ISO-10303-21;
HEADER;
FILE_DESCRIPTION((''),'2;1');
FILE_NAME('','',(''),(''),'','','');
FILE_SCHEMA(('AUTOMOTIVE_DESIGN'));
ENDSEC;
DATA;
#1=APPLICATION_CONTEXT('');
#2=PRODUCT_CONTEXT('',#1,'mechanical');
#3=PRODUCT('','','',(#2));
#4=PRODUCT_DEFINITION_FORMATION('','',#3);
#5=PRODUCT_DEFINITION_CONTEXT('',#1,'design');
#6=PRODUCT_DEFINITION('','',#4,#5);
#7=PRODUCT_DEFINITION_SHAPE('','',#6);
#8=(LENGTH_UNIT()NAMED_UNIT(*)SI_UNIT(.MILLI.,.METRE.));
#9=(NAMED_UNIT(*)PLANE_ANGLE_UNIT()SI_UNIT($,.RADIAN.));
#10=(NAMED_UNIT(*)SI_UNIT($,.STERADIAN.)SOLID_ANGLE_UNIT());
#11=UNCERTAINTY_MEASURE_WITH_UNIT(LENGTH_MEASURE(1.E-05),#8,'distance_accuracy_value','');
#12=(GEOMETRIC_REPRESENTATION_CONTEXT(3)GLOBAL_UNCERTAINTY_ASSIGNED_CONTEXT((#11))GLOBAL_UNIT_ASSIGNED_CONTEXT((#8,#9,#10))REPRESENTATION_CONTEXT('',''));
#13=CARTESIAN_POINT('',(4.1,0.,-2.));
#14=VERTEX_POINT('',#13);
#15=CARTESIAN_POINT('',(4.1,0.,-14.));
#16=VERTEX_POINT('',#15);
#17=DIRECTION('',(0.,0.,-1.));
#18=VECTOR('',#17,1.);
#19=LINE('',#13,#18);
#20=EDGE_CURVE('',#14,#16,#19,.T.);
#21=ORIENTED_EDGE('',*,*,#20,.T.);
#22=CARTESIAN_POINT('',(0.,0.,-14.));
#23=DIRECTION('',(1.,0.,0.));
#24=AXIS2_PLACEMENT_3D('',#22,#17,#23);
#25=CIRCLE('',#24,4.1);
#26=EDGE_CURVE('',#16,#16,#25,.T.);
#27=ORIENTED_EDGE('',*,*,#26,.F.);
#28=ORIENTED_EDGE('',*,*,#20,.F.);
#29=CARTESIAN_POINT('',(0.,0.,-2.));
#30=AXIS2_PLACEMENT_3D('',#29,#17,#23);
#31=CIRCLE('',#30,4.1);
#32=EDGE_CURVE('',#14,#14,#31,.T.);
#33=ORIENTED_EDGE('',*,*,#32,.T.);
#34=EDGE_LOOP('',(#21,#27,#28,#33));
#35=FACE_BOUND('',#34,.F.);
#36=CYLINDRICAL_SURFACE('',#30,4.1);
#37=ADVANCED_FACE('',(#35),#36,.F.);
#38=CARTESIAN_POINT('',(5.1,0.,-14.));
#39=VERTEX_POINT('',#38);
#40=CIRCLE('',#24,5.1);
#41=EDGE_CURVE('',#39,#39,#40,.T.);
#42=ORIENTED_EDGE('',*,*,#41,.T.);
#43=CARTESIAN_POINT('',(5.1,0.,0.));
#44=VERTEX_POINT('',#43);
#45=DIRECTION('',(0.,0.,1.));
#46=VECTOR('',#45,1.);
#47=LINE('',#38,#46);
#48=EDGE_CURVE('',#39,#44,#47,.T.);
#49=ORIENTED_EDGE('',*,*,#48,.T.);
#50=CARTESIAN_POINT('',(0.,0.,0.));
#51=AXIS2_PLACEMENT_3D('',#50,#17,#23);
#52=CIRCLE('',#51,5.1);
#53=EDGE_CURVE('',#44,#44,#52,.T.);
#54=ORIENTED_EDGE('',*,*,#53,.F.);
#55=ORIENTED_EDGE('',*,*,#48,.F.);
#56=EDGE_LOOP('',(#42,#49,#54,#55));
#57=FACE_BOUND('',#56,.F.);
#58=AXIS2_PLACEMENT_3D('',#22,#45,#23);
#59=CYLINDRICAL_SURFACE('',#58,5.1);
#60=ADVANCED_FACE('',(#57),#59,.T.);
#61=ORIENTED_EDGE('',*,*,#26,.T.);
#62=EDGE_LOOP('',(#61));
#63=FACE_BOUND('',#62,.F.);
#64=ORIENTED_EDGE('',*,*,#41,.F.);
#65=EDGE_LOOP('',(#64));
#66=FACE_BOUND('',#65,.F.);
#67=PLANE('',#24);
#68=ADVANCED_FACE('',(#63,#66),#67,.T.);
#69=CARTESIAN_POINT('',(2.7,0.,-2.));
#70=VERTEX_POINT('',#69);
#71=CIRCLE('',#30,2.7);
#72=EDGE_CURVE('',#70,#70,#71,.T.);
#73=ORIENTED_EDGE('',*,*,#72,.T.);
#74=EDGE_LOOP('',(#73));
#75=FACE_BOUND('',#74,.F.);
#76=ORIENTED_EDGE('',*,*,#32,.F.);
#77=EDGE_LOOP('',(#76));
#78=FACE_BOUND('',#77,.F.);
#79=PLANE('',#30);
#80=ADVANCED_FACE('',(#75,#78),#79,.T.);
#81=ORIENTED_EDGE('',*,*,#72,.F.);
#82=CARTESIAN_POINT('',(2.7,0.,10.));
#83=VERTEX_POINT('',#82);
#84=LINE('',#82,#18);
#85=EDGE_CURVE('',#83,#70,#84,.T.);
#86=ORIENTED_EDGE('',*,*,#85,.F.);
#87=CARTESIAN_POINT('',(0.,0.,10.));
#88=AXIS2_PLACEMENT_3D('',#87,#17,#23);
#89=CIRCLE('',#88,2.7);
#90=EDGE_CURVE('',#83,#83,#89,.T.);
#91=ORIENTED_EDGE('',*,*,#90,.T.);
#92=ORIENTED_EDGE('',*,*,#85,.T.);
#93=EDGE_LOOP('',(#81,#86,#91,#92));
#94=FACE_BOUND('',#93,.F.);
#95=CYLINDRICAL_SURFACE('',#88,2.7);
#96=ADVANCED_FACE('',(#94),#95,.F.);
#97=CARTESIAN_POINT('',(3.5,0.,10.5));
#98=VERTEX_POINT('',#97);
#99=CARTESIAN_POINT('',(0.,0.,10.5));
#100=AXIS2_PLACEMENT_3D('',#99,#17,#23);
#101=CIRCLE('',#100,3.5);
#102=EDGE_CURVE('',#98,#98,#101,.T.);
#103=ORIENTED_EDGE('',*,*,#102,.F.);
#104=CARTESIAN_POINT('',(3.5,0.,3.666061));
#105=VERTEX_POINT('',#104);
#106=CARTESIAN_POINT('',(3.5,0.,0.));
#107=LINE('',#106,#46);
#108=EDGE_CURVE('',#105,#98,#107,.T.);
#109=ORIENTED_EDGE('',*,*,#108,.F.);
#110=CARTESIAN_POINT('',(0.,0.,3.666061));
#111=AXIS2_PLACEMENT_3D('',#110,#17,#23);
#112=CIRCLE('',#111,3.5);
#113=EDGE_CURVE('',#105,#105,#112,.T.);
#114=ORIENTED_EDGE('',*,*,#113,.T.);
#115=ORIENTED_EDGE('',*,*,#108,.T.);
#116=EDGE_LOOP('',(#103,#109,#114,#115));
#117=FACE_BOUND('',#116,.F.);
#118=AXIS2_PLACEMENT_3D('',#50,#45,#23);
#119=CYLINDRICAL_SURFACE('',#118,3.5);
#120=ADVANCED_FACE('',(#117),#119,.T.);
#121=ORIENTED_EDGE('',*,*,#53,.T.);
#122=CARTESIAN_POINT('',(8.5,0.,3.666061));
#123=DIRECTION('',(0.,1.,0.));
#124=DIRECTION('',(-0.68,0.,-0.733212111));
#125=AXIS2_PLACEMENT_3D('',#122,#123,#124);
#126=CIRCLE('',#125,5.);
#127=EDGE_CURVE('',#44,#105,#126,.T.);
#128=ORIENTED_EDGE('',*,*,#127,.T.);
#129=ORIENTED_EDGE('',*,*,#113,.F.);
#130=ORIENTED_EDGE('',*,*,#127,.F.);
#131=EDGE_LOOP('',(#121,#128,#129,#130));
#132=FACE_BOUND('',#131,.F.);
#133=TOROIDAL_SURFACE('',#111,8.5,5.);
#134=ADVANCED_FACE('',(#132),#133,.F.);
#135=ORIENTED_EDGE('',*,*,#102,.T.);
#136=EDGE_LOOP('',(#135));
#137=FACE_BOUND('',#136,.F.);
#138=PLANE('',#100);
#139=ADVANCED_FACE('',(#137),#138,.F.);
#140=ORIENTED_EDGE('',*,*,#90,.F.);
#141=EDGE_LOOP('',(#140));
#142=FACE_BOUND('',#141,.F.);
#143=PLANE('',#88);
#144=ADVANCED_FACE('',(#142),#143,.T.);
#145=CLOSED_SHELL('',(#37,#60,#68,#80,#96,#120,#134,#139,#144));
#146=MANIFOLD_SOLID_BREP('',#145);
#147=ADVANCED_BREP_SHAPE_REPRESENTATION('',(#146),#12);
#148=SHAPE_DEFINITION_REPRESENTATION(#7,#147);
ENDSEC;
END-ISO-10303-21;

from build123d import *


# Not quite as in the source:
# - a fillet or chamfer that OpenCascade refuses, or shapes differently, is made with other operations: its cross-section is extruded or revolved along the edge and cut away or added


with BuildPart() as f1:
    # F0 (on Front) → F1 (revolve)
    with BuildSketch(Plane.XZ):
        Polygon((4.1, -14), (5.1, -14), (5.1, 0), (3.5, 0), (3.5, 10.5), (0, 10.5), (0, 10), (2.7, 10), (2.7, -2), (4.1, -2), align=None)
    revolve(axis=Axis((0, 0, -6.7832856439), (0, 0, -1)))

    # F2: fillet of radius 5 on 1 edges, made by hand

    # F2_s1 → F2_t2 (revolve)
    with BuildSketch(Plane.XZ):
        with BuildLine():
            ThreePointArc((5.1, 0), (3.917424305, 1.666060556), (3.5, 3.666060556))
            Line((3.5, 3.666060556), (3.5, 0))
            Line((3.5, 0), (5.1, 0))
        make_face()
    revolve(axis=Axis((0, 0, 0), (0, 0, -1)))


solid = f1.part
